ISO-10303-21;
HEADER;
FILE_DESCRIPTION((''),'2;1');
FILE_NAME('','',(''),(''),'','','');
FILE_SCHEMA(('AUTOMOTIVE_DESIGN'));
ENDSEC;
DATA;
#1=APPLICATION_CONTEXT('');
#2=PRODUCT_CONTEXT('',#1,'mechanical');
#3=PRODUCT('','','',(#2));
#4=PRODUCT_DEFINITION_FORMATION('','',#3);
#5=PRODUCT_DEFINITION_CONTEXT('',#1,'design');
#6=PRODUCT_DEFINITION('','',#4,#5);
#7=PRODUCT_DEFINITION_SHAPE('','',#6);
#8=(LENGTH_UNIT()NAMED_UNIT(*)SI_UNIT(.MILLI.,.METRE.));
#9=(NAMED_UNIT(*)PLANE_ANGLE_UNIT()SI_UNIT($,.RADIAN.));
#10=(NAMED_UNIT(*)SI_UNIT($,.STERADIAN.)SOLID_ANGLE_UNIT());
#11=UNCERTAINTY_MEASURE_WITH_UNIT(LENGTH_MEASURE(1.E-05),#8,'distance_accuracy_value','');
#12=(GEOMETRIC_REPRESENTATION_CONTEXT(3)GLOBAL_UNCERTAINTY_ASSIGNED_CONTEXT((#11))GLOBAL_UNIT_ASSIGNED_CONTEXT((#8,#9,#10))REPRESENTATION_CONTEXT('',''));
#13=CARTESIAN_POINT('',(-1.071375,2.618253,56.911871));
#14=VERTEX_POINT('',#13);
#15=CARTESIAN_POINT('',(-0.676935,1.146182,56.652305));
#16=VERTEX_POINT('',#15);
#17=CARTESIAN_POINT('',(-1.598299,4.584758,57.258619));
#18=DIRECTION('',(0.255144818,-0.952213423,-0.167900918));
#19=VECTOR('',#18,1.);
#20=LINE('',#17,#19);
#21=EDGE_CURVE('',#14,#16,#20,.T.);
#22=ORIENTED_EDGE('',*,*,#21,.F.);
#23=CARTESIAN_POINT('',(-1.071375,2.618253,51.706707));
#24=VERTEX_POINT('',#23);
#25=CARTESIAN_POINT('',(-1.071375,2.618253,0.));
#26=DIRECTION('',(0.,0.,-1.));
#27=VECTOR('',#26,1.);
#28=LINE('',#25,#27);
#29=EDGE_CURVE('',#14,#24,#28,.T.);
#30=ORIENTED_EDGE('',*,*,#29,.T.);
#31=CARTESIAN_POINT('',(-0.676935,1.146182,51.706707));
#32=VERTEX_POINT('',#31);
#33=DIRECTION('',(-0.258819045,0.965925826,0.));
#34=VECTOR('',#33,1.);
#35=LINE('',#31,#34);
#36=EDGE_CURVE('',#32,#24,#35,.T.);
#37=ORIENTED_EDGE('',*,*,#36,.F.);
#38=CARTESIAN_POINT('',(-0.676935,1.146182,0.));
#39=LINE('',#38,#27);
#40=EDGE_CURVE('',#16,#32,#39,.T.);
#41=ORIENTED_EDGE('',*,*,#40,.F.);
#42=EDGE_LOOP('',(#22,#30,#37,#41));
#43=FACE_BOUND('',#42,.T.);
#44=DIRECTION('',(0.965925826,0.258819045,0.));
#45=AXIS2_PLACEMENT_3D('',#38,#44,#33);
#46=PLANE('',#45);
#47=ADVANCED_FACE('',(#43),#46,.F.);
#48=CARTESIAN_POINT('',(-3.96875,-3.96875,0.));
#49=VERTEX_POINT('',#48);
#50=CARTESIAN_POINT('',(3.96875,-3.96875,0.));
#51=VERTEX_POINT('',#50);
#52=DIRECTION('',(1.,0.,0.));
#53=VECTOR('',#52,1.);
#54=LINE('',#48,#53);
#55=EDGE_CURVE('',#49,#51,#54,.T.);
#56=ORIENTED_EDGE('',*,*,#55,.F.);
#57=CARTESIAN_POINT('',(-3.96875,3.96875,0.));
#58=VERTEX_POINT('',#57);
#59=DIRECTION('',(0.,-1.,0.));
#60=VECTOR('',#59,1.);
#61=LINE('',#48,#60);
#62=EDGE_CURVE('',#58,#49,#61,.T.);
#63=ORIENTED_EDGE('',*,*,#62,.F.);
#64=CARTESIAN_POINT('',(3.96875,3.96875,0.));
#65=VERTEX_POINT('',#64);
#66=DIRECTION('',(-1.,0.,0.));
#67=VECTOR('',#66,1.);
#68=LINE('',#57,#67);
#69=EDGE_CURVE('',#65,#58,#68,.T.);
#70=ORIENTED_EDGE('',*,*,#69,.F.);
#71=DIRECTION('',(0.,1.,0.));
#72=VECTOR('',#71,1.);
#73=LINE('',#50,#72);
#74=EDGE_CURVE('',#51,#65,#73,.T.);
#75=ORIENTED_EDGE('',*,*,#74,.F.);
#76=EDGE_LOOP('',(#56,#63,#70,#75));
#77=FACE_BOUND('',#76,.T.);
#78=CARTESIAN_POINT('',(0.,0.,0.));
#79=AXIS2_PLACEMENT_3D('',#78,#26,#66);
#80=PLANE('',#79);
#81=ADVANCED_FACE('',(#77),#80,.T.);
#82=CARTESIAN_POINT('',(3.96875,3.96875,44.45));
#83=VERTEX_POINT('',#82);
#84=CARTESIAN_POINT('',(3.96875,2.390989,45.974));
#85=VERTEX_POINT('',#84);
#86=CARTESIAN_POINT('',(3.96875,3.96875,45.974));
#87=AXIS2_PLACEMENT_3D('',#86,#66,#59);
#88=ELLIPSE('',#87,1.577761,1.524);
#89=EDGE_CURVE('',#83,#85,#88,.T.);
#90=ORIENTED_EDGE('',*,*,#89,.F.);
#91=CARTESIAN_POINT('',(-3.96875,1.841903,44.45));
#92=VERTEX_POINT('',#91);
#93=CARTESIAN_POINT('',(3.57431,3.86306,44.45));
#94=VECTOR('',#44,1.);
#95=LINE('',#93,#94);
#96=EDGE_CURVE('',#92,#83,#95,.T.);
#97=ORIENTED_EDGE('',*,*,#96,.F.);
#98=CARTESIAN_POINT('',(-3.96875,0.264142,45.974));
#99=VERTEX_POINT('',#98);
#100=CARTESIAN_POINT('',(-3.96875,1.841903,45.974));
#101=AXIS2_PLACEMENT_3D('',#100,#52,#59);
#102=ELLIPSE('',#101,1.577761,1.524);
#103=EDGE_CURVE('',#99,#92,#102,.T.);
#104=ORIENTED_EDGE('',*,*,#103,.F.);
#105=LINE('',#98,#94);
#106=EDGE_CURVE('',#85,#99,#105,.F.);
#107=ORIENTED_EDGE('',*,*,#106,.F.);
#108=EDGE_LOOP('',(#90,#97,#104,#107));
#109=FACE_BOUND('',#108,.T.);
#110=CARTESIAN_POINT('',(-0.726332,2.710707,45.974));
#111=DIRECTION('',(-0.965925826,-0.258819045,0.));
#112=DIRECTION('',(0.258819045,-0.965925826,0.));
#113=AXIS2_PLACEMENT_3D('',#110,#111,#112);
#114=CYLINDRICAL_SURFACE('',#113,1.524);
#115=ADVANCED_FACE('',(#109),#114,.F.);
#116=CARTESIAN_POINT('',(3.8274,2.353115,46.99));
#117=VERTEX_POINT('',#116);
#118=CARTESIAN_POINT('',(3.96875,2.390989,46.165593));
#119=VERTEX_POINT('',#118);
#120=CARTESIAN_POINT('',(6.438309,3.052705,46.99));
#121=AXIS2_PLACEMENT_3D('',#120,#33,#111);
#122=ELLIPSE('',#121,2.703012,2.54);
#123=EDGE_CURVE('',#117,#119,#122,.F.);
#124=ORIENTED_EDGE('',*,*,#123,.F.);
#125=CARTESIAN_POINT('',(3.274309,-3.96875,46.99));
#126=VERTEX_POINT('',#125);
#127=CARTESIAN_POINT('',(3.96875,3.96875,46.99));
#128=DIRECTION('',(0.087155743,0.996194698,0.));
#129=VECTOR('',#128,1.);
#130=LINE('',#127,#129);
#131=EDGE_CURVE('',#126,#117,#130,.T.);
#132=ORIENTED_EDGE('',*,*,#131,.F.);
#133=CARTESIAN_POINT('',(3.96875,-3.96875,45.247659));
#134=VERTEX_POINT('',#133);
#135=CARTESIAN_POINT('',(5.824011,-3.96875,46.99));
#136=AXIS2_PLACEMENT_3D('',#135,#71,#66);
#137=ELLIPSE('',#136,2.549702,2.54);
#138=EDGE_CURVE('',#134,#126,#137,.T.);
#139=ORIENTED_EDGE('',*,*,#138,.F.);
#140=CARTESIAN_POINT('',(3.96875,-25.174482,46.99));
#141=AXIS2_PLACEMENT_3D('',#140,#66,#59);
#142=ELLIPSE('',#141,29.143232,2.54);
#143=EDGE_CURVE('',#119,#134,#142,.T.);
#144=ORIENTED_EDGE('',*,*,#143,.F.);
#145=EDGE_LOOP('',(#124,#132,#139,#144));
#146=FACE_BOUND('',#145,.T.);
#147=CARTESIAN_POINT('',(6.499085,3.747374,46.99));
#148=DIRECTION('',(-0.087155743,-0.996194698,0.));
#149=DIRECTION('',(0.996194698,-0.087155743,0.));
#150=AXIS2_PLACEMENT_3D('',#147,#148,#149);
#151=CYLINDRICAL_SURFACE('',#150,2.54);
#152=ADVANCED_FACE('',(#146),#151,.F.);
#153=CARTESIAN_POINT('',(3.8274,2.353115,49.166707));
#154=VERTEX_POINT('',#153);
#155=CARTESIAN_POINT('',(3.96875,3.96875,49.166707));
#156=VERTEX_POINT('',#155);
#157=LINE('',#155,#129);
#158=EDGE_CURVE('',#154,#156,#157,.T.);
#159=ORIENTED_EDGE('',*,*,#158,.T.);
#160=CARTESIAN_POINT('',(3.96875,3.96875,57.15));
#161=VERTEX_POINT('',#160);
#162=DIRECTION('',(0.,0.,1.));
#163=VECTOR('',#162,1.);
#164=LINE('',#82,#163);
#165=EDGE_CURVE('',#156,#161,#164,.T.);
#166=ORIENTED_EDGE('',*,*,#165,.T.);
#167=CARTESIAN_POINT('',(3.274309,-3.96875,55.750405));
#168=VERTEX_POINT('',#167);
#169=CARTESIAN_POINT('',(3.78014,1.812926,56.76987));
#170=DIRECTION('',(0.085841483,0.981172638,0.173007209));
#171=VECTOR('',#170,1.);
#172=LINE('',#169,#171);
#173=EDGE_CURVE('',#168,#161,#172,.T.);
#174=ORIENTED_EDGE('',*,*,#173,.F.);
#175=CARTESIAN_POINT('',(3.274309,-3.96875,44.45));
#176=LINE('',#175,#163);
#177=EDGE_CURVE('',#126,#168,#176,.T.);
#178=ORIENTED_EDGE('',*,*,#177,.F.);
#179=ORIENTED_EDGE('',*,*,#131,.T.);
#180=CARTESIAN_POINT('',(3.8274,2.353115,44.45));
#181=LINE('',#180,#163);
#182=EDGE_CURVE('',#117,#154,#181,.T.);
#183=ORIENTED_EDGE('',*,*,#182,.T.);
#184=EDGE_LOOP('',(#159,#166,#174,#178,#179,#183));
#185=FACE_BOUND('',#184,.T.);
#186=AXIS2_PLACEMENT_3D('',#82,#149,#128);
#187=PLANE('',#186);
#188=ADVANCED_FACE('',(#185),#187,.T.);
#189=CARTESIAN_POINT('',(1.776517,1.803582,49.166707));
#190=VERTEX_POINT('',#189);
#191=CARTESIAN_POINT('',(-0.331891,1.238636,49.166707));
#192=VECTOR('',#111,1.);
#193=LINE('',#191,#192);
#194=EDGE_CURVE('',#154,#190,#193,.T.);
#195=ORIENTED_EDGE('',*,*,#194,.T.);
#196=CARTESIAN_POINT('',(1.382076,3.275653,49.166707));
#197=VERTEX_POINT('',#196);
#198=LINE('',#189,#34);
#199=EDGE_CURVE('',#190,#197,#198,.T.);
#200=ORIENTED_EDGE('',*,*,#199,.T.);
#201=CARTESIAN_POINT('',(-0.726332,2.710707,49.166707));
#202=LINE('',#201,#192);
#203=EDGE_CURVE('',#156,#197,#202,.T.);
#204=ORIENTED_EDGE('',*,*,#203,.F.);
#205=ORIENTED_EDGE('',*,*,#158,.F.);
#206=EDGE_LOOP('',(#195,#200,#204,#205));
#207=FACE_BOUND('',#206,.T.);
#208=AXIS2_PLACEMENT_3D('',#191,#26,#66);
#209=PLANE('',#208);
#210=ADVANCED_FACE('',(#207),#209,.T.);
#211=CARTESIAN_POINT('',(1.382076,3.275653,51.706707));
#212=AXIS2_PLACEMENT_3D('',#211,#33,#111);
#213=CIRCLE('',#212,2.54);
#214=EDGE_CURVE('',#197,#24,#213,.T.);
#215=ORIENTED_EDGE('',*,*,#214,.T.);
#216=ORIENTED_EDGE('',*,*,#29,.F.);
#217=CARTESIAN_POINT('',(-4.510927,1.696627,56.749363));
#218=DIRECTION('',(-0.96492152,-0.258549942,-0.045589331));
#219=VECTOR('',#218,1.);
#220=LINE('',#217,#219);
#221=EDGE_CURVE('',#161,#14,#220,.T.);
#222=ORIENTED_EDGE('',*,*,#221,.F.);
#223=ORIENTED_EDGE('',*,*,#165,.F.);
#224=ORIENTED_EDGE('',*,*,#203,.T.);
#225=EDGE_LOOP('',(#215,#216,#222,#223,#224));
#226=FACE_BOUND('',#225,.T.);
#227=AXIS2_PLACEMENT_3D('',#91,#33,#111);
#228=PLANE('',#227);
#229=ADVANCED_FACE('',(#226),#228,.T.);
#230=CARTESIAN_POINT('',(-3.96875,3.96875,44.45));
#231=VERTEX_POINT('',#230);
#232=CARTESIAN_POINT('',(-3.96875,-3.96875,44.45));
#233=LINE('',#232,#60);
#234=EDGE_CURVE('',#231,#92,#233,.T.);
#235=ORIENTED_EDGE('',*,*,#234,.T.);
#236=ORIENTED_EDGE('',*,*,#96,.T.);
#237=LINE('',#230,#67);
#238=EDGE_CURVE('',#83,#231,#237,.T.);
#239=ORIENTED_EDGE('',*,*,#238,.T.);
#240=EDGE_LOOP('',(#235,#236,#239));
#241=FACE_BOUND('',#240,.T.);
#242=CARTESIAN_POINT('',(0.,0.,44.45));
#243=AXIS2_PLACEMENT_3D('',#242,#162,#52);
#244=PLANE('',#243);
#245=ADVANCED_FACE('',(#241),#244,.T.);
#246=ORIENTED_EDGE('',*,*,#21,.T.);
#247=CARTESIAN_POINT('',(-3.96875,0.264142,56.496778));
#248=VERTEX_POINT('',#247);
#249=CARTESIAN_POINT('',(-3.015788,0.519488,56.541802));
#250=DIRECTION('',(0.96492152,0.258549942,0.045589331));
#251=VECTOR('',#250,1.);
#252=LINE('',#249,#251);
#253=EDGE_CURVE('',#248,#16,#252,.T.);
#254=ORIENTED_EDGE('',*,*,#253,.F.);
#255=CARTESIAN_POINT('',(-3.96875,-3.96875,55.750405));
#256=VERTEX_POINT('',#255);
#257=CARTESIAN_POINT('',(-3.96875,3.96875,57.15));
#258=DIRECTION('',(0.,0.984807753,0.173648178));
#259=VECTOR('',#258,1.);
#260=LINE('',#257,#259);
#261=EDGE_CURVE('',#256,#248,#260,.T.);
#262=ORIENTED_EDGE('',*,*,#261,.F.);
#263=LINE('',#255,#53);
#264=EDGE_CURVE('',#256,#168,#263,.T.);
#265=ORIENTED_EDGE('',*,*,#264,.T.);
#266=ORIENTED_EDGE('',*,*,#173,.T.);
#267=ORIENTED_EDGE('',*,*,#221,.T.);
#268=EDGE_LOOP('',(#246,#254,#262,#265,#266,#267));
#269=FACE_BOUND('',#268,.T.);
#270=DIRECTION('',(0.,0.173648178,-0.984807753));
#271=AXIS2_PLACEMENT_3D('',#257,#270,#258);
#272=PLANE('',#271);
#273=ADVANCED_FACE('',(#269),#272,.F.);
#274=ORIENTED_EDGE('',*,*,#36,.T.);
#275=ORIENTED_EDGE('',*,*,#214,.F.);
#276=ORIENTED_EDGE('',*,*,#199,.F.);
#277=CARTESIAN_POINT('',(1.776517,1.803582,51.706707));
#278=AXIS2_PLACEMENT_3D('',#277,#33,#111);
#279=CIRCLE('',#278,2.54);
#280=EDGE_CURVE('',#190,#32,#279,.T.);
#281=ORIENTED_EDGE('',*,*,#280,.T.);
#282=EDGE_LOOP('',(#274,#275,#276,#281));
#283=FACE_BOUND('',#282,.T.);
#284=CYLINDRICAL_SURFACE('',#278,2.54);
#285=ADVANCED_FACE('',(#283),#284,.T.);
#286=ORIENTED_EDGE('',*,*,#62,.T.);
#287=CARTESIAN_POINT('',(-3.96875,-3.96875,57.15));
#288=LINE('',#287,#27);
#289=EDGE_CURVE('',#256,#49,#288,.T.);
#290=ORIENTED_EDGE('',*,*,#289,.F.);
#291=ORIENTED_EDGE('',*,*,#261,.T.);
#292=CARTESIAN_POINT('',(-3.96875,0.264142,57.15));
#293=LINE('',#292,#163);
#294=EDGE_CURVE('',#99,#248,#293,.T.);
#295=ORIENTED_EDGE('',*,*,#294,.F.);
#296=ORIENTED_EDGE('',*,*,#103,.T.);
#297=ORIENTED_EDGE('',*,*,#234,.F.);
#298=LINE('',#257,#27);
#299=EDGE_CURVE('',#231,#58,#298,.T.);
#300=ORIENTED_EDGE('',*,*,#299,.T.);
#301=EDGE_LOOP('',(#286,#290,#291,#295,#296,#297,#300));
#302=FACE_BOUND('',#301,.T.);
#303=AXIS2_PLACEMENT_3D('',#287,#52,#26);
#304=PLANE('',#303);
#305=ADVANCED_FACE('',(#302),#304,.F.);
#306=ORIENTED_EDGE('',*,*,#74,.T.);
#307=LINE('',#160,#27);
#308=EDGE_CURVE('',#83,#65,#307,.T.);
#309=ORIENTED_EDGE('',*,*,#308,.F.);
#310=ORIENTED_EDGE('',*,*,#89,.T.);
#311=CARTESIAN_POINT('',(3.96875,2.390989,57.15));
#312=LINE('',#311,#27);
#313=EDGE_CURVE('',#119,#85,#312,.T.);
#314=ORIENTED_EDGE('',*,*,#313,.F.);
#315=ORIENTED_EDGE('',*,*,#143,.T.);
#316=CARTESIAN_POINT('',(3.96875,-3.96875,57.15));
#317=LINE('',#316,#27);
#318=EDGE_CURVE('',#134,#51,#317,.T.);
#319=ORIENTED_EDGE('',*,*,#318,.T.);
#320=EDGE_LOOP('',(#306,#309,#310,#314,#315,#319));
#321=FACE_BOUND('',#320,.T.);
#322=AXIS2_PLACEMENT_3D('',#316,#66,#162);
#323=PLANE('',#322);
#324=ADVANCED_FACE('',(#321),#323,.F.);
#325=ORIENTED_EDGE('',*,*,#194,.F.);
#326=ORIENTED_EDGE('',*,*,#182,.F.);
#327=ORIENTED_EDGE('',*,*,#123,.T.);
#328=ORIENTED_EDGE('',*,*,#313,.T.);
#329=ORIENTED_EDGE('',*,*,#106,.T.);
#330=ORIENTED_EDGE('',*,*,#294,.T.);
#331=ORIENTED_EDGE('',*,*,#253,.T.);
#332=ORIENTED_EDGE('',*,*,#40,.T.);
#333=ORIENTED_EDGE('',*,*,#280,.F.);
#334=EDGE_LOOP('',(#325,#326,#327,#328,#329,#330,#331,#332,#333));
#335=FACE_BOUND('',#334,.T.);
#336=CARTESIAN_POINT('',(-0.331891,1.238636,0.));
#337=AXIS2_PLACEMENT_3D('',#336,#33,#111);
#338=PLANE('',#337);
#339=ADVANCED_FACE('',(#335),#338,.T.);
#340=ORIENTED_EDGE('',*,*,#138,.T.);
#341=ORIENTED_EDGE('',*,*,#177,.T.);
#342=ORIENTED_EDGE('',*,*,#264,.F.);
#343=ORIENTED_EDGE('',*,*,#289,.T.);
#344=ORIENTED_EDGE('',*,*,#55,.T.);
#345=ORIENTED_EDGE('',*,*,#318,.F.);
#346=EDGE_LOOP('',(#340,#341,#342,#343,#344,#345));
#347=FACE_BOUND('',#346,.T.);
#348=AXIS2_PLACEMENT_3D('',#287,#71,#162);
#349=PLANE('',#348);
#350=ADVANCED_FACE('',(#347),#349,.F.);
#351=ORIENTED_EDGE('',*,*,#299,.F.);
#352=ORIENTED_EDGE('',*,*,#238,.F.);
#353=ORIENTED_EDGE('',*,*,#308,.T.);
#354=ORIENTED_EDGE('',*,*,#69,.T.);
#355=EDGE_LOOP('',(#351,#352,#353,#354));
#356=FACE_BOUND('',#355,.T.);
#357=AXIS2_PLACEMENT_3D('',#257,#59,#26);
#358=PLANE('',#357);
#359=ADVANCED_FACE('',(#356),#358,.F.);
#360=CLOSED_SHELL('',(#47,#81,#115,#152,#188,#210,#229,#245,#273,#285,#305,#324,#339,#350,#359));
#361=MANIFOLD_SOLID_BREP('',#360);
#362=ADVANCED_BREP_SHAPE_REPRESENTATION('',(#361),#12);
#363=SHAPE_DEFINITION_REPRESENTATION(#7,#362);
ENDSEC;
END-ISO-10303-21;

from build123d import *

# Parameters (mm, degrees)
SKETCH1_W           = 7.9375
SKETCH1_H           = 7.9375
BOSS_EXTRUDE1_DEPTH = 57.15
SKETCH2_OUTSIDE_W   = 21.586
SKETCH2_OUTSIDE_H   = 21.586
CUT_EXTRUDE1_DEPTH  = 12.7
FILLET2_R           = 2.54
CUT_EXTRUDE2_DEPTH  = 58.834914911
CUT_EXTRUDE3_DEPTH  = 1.524
FILLET3_R           = 1.524


with BuildPart() as part:
    # Sketch1 → Boss-Extrude1 (new body)
    with BuildSketch(Plane.XY):
        Rectangle(SKETCH1_W, SKETCH1_H)
    extrude(amount=BOSS_EXTRUDE1_DEPTH)

    # Sketch2 outside → Cut-Extrude1 (cut)
    with BuildSketch(Plane.XY.offset(57.15)):
        Rectangle(SKETCH2_OUTSIDE_W, SKETCH2_OUTSIDE_H)
        Polygon((-3.96875, 1.841903285), (3.96875, 3.96875), (3.274308733, -3.96875), (-3.96875, -3.96875), align=None, mode=Mode.SUBTRACT)
    extrude(amount=-CUT_EXTRUDE1_DEPTH, mode=Mode.SUBTRACT)

    # Fillet2
    # the kernel refuses this fillet: 2.54 mm, written as the material it adds along each edge
    with BuildSketch(Plane(origin=(4.522188966, 10.294586333, 44.45), x_dir=(0.9961946980917462, -0.08715574274765137, 0), z_dir=(-0.08715574274765137, -0.9961946980917462, 0))) as fillet2_piece_1_section:
        with BuildLine():
            CenterArc((FILLET2_R, FILLET2_R), FILLET2_R, 180, 90)
            Line((0, FILLET2_R), (0, 0))
            Line((0, 0), (FILLET2_R, 0))
        make_face()
    fillet2_piece_1 = extrude(amount=20.667819961, mode=Mode.PRIVATE)
    fillet2_piece_1 = split(fillet2_piece_1, bisect_by=Plane(origin=(3.717682753, -3.96875, 45.282950751), z_dir=(0, 1, 0)), keep=Keep.TOP, mode=Mode.PRIVATE)
    fillet2_piece_1 = split(fillet2_piece_1, bisect_by=Plane(origin=(3.96875, -1.099038231, 45.282950751), z_dir=(-1, 0, 0)), keep=Keep.TOP, mode=Mode.PRIVATE)
    add(fillet2_piece_1)

    # Sketch3 → Cut-Extrude2 (cut, through all)
    with BuildSketch(Plane(origin=(3.96875, 0, 0), x_dir=(0, 0, -1), z_dir=(1, 0, 0))):
        Polygon((-57.15, 3.96875), (-55.750404591, -3.96875), (-57.15, -3.96875), align=None)
    extrude(amount=-CUT_EXTRUDE2_DEPTH, mode=Mode.SUBTRACT)

    # Sketch4 → Cut-Extrude3 (cut)
    with BuildSketch(Plane(origin=(-0.726331661, 2.710706661, 0), x_dir=(0.96592582628907, 0.2588190451025147, 0), z_dir=(-0.25881904510251463, 0.9659258262890699, 0))):
        Polygon((-3.356798474, -44.45), (-5.976622114, -44.45), (-5.976622114, -56.911870861), (-0.35721527, -56.911870861), (-3.356798474, -56.77497954), align=None)
        with BuildLine():
            Line((4.860706208, -44.45), (-3.356798474, -44.45))
            Line((-3.356798474, -44.45), (-3.356798474, -56.77497954))
            Line((-3.356798474, -56.77497954), (-0.35721527, -56.911870861))
            Line((-0.35721527, -56.911870861), (-0.35721527, -51.706707489))
            ThreePointArc((-0.35721527, -51.706707489), (0.386733506, -49.910656265), (2.18278473, -49.166707489))
            Line((2.18278473, -49.166707489), (4.860706208, -49.166707489))
            Line((4.860706208, -49.166707489), (4.860706208, -46.989995764))
            Line((4.860706208, -46.989995764), (4.860706208, -44.45))
        make_face()
        Polygon((8.895382264, -44.45), (4.860706208, -44.45), (4.860706208, -46.989995764), (4.860706208, -49.166707489), (4.860706208, -57.15), (8.895382264, -57.15), align=None)
    extrude(amount=-CUT_EXTRUDE3_DEPTH, mode=Mode.SUBTRACT)

    # Fillet3
    fillet3_edges = [part.edges().sort_by_distance(p)[0] for p in [
        (0, 1.327565744, 44.45),
    ]]
    fillet(fillet3_edges, radius=FILLET3_R)


solid = part.part
